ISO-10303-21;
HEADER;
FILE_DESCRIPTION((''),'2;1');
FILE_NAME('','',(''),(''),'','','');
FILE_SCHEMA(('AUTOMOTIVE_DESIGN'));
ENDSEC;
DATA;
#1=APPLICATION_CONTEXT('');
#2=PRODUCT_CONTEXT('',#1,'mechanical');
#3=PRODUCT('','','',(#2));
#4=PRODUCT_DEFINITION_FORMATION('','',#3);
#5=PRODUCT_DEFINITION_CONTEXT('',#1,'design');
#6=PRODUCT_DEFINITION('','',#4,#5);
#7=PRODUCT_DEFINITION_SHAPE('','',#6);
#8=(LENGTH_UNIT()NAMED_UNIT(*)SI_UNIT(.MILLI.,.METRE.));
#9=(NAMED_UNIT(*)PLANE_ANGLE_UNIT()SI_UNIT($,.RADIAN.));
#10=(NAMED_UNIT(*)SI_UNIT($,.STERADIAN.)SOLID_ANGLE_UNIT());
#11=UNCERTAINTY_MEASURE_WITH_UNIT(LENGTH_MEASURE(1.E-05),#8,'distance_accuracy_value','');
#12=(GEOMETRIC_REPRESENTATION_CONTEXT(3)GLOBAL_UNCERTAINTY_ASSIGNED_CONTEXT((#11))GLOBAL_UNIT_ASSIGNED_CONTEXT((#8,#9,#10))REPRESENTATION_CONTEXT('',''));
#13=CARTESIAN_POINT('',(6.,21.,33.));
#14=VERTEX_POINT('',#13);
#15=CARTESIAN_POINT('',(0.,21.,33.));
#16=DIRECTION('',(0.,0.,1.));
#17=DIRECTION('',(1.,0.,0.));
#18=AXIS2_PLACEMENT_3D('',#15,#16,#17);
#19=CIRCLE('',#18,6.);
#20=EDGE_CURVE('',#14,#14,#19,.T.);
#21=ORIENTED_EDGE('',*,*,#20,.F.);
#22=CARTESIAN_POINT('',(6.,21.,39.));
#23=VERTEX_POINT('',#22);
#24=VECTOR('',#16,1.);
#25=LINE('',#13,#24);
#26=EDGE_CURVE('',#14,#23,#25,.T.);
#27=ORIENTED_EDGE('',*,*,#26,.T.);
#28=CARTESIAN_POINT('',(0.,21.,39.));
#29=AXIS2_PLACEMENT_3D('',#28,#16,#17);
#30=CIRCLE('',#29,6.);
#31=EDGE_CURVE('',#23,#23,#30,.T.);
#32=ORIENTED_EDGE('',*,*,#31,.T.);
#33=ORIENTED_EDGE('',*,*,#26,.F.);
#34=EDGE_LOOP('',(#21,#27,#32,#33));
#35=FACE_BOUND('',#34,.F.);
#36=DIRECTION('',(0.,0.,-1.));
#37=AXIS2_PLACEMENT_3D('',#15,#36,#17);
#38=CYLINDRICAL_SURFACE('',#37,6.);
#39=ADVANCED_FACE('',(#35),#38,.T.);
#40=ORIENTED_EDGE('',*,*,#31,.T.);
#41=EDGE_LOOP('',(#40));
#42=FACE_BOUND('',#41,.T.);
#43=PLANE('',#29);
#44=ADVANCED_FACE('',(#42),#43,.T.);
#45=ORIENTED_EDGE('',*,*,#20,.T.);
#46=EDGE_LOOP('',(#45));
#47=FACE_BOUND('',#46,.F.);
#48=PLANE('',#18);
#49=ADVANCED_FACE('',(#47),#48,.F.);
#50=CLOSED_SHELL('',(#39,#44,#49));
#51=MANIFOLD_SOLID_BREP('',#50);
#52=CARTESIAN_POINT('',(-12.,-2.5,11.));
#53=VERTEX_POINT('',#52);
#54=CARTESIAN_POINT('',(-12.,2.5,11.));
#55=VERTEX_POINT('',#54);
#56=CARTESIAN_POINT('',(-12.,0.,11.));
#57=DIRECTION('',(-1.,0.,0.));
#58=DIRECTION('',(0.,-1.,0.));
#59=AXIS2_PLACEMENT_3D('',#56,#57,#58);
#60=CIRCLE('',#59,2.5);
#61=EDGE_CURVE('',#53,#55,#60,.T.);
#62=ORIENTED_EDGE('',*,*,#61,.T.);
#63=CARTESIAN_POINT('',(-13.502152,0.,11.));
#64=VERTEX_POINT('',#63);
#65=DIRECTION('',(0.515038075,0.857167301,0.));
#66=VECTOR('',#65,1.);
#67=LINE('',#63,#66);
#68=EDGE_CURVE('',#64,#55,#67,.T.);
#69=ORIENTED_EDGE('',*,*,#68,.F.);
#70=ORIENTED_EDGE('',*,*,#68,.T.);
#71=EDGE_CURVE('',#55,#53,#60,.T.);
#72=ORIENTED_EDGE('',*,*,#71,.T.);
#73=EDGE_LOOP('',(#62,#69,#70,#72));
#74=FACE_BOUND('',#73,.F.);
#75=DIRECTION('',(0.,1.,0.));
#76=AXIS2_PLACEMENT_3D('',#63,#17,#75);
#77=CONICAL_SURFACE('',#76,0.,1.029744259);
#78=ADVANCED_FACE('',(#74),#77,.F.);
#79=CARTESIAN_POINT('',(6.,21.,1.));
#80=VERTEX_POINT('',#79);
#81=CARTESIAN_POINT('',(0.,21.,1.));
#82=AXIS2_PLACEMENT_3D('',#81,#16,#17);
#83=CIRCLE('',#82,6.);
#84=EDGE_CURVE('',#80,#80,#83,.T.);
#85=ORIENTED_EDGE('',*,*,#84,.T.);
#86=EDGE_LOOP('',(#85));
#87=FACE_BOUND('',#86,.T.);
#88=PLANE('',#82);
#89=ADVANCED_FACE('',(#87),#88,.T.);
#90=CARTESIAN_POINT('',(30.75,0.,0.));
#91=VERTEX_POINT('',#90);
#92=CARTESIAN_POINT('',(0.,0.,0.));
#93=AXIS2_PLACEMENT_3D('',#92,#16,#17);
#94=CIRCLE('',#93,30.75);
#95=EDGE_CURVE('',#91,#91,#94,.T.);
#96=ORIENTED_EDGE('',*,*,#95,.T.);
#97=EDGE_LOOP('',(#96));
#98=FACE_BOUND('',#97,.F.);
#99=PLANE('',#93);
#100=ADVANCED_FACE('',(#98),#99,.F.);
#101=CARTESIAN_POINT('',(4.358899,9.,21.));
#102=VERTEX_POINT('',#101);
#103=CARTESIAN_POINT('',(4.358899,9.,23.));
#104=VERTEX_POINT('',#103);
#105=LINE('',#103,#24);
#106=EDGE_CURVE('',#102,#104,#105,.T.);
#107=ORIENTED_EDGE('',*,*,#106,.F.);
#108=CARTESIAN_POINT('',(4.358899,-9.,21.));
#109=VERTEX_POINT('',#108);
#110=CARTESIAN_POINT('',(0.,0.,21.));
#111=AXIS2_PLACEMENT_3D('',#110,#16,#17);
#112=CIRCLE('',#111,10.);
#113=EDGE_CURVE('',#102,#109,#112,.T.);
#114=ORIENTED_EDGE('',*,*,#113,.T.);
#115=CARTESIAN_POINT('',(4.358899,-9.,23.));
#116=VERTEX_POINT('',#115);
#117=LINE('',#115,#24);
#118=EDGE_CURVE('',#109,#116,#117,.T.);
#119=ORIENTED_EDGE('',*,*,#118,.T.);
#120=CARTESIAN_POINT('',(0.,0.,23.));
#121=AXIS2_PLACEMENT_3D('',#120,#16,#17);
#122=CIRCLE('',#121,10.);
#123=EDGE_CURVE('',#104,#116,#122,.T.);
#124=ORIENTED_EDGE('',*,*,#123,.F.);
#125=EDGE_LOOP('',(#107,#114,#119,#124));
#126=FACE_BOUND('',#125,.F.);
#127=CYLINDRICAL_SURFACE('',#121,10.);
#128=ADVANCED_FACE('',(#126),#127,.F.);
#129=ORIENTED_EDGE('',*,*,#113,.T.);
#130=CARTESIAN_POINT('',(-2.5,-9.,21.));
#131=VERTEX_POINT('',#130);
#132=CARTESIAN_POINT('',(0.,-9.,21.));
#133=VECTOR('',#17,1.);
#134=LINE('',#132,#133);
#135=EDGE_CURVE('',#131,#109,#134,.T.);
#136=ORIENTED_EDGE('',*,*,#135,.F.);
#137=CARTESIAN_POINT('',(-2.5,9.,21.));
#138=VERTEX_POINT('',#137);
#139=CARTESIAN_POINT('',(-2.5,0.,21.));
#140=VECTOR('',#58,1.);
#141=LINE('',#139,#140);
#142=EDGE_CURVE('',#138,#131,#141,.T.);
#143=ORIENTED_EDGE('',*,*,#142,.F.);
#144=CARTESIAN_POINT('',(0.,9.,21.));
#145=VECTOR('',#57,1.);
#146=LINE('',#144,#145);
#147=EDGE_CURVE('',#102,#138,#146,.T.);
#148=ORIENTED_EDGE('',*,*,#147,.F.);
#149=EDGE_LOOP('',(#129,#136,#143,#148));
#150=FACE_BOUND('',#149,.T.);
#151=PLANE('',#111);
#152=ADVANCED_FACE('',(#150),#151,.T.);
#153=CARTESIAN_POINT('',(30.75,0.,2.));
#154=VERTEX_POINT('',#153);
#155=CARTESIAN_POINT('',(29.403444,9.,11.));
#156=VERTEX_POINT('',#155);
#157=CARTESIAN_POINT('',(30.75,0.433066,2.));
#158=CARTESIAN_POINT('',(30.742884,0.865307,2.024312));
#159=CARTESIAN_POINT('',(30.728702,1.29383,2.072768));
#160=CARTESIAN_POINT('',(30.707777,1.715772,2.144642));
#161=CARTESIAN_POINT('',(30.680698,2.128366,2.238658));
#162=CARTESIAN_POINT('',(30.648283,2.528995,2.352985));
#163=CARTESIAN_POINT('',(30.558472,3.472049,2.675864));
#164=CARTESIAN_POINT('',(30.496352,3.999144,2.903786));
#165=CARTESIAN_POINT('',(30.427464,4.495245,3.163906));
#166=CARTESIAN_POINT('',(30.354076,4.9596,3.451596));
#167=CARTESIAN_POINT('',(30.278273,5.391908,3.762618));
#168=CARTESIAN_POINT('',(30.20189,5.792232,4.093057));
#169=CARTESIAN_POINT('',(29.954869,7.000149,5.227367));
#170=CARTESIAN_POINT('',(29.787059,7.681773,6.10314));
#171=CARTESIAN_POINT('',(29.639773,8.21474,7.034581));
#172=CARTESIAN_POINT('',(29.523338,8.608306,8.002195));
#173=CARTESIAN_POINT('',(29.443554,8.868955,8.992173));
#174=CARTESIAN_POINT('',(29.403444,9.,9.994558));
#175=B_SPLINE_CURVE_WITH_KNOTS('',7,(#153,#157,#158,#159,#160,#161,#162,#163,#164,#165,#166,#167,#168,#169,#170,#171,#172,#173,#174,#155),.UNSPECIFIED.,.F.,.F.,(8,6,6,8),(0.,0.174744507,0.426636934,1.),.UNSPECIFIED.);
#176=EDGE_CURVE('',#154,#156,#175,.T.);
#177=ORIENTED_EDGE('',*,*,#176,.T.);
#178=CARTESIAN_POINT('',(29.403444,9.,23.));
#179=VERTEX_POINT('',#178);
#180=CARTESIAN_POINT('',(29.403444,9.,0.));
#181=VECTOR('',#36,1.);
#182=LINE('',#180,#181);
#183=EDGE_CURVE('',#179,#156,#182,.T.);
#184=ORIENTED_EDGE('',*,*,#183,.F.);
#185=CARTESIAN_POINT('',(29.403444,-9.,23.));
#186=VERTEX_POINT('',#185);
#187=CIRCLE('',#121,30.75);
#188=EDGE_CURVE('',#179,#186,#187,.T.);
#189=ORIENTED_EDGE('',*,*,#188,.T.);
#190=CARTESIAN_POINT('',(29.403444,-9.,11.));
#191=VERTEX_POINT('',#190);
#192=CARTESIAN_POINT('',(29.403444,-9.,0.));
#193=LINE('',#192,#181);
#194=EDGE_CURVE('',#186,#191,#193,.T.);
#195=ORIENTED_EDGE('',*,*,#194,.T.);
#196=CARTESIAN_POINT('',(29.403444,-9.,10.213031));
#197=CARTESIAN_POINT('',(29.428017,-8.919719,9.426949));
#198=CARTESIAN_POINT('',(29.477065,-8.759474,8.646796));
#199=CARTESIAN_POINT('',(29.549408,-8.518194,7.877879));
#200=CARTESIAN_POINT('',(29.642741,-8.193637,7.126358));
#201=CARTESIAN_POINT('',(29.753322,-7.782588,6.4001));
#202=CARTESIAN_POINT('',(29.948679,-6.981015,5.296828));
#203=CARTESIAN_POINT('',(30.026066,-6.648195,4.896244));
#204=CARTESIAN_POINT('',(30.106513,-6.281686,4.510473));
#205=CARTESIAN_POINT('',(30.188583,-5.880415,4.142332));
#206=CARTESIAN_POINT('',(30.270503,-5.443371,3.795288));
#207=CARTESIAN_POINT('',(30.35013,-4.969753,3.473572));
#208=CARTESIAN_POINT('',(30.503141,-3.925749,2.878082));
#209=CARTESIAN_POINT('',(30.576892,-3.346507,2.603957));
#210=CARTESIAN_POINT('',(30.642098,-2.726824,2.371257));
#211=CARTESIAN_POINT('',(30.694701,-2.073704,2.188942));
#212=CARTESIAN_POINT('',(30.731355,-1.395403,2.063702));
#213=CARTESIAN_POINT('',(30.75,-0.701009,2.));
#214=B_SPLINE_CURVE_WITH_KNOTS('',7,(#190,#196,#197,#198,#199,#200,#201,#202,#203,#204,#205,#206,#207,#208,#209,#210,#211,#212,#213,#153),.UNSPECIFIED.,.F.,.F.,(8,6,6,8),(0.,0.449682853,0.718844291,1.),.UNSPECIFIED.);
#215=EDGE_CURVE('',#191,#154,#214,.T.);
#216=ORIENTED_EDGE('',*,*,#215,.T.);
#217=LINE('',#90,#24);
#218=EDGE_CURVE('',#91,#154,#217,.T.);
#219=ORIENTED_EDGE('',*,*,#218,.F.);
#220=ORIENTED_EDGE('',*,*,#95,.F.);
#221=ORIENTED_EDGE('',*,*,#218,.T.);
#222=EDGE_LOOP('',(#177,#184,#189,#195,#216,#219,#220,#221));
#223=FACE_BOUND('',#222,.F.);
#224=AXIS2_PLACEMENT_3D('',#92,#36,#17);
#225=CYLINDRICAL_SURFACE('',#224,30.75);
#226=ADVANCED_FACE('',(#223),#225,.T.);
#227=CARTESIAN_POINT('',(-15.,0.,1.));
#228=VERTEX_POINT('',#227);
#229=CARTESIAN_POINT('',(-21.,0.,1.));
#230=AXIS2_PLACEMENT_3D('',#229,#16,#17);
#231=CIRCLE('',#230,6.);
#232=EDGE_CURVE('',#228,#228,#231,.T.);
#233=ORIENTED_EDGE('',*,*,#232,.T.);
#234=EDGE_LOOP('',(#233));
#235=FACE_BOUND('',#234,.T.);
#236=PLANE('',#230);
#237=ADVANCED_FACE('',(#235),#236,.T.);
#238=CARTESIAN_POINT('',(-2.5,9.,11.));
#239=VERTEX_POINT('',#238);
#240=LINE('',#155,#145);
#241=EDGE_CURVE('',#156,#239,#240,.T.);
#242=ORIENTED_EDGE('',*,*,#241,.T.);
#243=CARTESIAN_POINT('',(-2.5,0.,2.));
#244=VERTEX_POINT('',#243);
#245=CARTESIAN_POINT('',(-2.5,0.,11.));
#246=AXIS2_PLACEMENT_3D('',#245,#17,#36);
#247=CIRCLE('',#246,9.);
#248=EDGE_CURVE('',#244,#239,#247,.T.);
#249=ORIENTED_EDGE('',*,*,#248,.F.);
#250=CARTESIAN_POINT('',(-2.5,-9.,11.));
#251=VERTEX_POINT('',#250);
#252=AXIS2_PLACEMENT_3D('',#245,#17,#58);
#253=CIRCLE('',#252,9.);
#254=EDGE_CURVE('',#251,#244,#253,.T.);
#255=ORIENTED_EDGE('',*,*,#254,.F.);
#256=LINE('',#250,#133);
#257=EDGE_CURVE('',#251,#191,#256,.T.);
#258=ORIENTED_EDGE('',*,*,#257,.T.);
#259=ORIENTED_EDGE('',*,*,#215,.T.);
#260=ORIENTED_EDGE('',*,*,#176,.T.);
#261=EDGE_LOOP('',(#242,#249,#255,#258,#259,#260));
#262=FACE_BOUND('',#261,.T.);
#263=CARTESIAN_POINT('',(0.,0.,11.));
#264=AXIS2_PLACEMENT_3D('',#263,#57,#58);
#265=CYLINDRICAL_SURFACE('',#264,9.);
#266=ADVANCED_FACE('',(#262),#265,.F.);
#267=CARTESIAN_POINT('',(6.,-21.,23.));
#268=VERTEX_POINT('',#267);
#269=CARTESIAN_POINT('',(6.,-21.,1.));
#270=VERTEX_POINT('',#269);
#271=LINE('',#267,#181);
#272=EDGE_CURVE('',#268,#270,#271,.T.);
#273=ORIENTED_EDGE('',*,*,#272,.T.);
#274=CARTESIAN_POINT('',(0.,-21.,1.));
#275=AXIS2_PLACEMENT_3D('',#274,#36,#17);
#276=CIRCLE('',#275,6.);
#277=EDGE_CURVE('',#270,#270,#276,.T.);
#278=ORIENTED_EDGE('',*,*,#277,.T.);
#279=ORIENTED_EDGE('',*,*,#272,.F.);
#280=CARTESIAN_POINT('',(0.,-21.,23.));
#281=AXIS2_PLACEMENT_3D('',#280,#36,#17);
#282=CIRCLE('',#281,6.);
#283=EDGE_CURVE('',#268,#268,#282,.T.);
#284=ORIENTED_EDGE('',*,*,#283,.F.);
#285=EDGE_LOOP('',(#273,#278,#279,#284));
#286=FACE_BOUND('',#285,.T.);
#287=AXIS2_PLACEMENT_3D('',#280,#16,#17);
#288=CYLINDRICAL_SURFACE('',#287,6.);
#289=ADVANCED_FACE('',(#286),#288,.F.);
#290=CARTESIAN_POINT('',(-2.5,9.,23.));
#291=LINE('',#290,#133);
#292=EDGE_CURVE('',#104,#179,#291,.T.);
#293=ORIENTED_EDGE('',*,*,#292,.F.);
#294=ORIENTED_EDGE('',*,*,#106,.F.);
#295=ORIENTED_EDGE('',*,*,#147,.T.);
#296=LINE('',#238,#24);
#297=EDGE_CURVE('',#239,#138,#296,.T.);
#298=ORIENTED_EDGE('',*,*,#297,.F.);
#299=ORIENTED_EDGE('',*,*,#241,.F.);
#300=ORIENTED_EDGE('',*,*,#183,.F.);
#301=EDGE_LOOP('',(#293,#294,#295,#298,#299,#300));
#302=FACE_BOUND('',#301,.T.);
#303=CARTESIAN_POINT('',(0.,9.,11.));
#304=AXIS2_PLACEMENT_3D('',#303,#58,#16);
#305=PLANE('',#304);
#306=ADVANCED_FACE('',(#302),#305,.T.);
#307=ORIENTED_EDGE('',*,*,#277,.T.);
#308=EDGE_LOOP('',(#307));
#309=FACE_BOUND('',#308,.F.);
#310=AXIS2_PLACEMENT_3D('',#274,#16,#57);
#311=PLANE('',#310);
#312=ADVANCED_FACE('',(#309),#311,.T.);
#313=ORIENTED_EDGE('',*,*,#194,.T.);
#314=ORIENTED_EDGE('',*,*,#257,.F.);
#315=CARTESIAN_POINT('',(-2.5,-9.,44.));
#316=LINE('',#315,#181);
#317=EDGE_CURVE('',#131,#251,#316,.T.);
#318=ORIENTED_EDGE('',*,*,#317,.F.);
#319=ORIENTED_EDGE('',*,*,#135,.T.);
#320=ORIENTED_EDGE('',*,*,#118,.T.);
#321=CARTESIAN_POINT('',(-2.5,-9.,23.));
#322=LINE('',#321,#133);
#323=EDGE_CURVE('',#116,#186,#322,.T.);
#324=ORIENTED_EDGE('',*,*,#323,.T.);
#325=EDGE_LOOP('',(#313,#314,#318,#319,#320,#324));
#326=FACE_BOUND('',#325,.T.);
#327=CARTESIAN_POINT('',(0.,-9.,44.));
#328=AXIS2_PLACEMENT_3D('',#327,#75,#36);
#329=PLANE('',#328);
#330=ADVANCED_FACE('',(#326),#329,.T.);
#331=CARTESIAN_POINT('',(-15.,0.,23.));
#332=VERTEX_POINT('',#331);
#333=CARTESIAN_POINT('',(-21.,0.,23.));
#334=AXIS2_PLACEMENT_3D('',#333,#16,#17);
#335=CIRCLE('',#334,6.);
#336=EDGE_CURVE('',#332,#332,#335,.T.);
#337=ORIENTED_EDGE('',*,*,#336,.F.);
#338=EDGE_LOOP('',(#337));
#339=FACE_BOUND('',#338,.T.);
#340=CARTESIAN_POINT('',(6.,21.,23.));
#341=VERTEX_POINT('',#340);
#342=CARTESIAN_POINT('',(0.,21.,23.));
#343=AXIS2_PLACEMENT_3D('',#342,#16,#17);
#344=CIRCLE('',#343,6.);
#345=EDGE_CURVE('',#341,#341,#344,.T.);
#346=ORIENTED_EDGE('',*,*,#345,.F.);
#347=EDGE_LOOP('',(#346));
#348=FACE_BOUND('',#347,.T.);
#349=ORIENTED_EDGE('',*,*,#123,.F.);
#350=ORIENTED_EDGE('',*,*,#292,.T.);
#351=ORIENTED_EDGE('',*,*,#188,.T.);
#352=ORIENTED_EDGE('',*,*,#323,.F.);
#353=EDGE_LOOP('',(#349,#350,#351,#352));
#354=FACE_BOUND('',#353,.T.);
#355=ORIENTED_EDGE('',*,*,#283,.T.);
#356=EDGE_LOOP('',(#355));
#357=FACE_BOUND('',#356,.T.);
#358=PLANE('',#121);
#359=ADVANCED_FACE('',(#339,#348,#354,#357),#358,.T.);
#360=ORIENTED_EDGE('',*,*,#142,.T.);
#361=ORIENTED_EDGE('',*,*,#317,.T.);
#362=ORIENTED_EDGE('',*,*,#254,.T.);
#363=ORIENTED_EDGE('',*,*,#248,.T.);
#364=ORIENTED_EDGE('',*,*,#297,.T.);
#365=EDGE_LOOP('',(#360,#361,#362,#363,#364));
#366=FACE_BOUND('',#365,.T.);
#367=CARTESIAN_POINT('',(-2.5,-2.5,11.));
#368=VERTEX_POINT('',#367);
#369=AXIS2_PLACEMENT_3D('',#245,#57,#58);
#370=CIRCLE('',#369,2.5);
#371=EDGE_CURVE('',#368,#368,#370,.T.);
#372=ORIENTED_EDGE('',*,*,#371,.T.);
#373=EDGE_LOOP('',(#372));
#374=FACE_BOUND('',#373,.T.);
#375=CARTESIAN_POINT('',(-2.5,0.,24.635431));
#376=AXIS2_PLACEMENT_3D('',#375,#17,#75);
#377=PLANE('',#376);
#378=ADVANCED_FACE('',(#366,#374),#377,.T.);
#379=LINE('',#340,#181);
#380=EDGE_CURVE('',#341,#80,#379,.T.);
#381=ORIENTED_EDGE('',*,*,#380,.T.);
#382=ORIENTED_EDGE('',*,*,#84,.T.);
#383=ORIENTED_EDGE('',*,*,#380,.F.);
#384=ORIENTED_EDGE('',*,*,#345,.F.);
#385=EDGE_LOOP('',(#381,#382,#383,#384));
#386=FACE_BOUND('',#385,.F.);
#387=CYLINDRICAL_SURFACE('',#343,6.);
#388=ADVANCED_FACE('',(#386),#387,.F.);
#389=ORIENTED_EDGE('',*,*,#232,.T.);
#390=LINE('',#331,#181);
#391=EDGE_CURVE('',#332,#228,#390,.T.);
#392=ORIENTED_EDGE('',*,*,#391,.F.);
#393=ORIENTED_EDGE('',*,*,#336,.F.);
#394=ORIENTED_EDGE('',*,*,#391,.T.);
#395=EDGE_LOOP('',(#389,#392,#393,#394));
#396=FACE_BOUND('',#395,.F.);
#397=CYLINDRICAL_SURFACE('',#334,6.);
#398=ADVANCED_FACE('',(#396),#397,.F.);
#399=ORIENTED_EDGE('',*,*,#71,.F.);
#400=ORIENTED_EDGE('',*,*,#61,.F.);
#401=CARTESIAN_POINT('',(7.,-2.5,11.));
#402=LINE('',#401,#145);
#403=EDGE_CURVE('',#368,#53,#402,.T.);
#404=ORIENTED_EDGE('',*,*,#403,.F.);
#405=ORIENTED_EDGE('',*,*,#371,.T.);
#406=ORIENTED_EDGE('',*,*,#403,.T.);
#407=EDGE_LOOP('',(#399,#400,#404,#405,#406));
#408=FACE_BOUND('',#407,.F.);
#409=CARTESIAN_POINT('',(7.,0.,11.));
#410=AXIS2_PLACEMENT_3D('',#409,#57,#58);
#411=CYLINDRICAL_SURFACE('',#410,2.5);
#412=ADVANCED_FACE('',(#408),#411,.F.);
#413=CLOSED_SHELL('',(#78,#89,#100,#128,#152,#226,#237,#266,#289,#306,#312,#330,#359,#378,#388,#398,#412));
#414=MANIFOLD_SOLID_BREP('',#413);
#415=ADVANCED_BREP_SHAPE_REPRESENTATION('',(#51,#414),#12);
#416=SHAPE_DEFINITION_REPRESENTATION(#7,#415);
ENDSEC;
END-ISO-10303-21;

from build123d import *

# Parameters (mm, degrees)
F0_R          = 30.75
F1_DEPTH      = 23
F4_DEPTH      = 31.7500001
F4_DEPTH_BACK = 2.5
F5_R          = 6
F6_DEPTH      = 22
F7_DEPTH      = 22
F9_D          = 5
F9_DEPTH      = 9.5
F9_TIP        = 1.5021515476
F10_R         = 10
F11_DEPTH     = 2
F13_R         = 6
F14_DEPTH     = 6


# Not quite as in the source:
# - a pattern or mirror of a feature is missing from the dataset's text; its kind, count and spacing are read off the source's solid


with BuildPart() as f1:
    # F0 (on Top) → F1 (new body)
    with BuildSketch(Plane.XY):
        Circle(F0_R)
    extrude(amount=F1_DEPTH)

    # F3 (on Right) → F4 (cut, two sides)
    with BuildSketch(Plane.YZ) as f4_sk:
        with BuildLine():
            Line((9, 11), (9, 44))
            Line((9, 44), (-9, 44))
            Line((-9, 44), (-9, 11))
            ThreePointArc((-9, 11), (-6.3639610307, 4.6360389693), (0, 2))
            ThreePointArc((0, 2), (6.3639610307, 4.6360389693), (9, 11))
        make_face()
    extrude(amount=F4_DEPTH, mode=Mode.SUBTRACT)
    extrude(f4_sk.sketch, amount=-F4_DEPTH_BACK, mode=Mode.SUBTRACT)

    # F5 (on face) → F6 (cut)
    with BuildSketch(Plane.XY.offset(23)):
        with Locations((0, 21)):
            Circle(F5_R)
    f6 = extrude(amount=-F6_DEPTH, mode=Mode.SUBTRACT)

    # F6_copies: F6 across plane
    add(f6.mirror(Plane(origin=(0, 0, 0), x_dir=(0, 0, -1), z_dir=(0, -1, 0))), mode=Mode.SUBTRACT)

    # F5 (on face) → F7 (cut)
    with BuildSketch(Plane.XY.offset(23)):
        with Locations((-21, 0)):
            Circle(F5_R)
    extrude(amount=-F7_DEPTH, mode=Mode.SUBTRACT)

    # F9
    with Locations(Plane.YZ.offset(-2.5)):
        with Locations((0, 11)):
            Hole(F9_D / 2, depth=F9_DEPTH)
            with Locations((0, 0, -(F9_DEPTH + F9_TIP / 2))):  # 118° drill point
                Cone(0, F9_D / 2, F9_TIP, mode=Mode.SUBTRACT)

    # F10 (on face) → F11 (cut)
    with BuildSketch(Plane.XY.offset(23)):
        Circle(F10_R)
    extrude(amount=-F11_DEPTH, mode=Mode.SUBTRACT)


with BuildPart() as f14:
    # F13 (on offset) → F14 (new body)
    with BuildSketch(Plane.XY.offset(33)):
        with Locations((0, 21)):
            Circle(F13_R)
    extrude(amount=F14_DEPTH)


solid = Compound([f1.part, f14.part])
